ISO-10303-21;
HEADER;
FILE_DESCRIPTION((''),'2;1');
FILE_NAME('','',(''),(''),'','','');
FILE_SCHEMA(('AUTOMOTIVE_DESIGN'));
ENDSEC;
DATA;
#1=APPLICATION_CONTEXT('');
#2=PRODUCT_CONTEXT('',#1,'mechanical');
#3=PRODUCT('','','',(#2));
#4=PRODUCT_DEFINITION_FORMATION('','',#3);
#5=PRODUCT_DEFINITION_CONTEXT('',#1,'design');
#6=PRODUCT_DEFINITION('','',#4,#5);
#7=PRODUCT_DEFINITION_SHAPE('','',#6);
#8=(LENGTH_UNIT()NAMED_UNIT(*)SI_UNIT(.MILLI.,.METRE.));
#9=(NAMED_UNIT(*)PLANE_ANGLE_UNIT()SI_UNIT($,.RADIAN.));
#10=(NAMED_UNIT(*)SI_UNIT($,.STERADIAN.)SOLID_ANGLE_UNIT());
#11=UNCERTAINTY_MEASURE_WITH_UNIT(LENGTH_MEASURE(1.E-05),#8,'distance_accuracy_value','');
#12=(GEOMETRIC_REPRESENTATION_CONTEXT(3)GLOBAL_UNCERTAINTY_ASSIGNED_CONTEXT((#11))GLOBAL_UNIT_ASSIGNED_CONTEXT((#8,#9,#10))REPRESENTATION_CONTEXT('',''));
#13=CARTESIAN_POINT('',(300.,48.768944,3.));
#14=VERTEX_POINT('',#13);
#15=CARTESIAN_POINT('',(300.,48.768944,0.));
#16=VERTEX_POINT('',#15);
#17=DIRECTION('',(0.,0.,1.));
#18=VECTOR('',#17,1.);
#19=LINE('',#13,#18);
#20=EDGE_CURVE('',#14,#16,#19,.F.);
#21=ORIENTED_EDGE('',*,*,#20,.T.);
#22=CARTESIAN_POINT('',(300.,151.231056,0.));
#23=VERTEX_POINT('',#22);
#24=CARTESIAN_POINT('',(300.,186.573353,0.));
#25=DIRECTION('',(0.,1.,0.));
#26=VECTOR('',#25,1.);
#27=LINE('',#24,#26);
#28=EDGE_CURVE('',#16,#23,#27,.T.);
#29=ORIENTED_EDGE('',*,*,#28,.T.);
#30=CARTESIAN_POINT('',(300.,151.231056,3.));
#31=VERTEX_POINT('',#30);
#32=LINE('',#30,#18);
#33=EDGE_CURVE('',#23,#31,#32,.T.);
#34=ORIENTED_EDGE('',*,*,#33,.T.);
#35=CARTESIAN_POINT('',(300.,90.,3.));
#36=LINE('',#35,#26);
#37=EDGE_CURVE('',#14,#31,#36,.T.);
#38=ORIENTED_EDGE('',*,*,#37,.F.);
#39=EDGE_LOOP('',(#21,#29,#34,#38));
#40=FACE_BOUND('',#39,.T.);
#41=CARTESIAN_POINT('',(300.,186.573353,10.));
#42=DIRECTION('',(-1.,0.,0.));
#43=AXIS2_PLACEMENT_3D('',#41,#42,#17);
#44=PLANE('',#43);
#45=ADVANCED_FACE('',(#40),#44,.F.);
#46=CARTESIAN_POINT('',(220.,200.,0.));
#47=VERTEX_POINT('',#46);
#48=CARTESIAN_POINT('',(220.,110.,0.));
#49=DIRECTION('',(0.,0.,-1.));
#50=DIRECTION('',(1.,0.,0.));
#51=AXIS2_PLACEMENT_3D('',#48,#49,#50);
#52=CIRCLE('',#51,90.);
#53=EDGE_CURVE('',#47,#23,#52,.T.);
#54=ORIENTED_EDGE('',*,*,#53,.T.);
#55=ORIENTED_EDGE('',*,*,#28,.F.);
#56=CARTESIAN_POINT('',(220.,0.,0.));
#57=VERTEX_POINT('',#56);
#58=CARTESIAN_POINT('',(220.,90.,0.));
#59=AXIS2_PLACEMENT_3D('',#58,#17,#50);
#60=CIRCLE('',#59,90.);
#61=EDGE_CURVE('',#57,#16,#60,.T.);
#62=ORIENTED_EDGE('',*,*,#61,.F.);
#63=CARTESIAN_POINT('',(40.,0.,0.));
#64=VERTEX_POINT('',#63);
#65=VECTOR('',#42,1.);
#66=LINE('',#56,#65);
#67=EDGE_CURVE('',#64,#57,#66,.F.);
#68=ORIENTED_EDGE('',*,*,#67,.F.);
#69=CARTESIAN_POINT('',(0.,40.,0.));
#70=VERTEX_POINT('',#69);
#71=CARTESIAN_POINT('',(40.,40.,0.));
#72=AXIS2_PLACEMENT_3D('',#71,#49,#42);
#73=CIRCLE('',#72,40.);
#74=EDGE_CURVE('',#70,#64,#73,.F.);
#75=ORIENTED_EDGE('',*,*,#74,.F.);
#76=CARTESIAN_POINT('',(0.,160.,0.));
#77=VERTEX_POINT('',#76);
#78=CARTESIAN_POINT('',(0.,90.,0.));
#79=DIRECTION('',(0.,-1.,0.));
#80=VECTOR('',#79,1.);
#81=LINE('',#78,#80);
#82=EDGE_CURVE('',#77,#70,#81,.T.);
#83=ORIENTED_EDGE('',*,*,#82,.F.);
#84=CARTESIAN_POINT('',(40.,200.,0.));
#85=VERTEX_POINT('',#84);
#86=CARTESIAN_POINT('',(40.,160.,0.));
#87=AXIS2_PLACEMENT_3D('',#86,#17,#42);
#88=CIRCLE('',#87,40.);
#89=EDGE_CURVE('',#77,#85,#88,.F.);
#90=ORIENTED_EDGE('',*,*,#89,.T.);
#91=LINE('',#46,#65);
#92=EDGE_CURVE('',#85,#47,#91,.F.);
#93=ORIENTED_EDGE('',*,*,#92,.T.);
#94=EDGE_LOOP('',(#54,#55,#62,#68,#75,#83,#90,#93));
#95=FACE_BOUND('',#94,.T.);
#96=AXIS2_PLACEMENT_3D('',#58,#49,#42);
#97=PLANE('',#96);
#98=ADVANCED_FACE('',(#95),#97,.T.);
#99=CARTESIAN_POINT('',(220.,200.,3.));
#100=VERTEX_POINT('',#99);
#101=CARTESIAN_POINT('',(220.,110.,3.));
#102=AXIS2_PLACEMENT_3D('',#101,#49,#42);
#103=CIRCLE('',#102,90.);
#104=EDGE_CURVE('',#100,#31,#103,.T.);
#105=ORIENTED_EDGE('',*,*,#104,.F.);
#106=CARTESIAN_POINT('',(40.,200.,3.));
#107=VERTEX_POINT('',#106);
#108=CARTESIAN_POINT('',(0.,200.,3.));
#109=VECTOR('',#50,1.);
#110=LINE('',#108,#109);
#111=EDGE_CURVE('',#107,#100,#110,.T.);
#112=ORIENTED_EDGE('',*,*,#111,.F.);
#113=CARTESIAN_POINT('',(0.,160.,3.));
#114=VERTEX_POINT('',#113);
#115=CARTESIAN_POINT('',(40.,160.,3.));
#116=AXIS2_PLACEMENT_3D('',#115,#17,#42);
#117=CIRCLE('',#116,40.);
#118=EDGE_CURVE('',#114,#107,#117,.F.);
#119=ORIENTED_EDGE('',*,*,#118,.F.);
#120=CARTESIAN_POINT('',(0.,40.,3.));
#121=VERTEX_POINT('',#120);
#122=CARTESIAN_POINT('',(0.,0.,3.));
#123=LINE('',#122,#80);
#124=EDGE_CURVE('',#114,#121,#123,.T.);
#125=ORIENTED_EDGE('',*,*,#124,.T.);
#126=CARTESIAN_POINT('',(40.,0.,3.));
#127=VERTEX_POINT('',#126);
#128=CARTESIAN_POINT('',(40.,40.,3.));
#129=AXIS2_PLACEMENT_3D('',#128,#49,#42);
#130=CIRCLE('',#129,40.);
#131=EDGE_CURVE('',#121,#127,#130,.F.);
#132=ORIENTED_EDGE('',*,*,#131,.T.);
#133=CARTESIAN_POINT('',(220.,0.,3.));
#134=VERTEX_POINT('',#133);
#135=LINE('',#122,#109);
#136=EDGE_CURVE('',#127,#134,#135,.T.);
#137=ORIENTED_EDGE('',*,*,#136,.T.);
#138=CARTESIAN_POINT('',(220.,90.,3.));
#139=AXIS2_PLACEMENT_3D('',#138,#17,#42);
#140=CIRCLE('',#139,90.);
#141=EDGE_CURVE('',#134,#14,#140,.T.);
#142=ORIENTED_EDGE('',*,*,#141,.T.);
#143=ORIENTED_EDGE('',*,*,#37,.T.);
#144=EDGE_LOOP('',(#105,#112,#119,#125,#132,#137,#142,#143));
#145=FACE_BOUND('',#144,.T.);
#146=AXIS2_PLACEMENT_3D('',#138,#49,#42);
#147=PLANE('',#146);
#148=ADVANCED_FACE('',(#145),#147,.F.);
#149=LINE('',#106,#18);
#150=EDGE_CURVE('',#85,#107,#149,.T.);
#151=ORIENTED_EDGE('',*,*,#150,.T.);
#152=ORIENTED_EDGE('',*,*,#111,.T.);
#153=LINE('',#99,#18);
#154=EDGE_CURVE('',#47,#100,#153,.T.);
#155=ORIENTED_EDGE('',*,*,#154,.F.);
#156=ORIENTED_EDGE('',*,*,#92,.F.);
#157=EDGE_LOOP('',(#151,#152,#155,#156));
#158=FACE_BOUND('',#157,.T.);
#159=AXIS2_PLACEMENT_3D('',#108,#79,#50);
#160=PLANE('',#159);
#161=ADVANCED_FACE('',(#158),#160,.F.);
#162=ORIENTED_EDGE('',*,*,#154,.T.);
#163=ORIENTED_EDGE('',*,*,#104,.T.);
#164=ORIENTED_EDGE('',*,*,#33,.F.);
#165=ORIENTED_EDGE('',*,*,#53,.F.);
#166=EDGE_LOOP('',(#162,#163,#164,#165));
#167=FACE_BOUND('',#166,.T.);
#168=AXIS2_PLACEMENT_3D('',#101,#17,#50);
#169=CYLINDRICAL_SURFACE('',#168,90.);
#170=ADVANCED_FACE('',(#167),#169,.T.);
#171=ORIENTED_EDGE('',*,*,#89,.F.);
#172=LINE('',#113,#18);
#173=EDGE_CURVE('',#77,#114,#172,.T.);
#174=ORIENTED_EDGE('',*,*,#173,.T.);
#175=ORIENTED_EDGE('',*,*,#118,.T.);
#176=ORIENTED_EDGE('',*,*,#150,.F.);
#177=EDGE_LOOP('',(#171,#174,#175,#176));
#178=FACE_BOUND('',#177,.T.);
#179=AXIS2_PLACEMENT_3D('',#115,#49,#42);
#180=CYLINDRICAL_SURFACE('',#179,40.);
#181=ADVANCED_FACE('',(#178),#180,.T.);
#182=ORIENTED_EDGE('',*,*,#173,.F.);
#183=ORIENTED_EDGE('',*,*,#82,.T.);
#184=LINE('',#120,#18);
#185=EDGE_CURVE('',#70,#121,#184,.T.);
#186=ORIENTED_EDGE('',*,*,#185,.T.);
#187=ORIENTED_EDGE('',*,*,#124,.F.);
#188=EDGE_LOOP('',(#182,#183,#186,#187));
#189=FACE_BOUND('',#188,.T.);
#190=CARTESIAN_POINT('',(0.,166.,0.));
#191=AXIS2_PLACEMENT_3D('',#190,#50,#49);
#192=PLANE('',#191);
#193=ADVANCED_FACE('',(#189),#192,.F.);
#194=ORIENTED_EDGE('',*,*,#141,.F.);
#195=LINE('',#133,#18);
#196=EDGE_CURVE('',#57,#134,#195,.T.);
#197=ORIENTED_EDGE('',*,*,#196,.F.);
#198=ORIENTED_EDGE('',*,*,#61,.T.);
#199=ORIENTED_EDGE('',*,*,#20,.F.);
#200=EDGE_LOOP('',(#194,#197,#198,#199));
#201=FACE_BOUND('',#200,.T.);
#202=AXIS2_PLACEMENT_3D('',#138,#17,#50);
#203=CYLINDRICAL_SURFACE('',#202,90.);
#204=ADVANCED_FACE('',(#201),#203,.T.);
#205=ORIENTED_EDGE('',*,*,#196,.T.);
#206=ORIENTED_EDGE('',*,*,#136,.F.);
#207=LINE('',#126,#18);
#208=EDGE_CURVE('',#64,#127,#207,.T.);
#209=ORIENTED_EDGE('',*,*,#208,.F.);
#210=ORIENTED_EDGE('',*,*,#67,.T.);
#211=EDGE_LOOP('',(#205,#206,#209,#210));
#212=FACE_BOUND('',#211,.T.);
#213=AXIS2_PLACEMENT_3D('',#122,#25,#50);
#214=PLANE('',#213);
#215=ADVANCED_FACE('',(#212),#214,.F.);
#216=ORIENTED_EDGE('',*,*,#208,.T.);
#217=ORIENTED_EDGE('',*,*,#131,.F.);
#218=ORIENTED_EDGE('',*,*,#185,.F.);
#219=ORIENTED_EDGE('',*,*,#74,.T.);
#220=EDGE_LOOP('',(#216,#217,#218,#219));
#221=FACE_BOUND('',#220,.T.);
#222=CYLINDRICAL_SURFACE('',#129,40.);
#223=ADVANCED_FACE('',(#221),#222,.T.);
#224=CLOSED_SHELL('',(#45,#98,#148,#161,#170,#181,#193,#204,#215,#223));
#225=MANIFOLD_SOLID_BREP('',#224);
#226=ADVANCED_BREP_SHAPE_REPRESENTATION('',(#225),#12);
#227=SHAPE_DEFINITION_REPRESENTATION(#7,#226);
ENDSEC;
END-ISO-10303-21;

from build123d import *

# Parameters (mm, degrees)
EXTRUDE_1_DEPTH         = 3
EXTRUDE_START           = -42
EXTRUDE_2_OUTLINE_W     = 3
EXTRUDE_2_OUTLINE_H     = 100
EXTRUDE_2_DEPTH         = 41
EXTRUDE_START_2         = -1
EXTRUDE_2_2_OUTLINE_R   = 2
EXTRUDE_2_2_OUTLINE_W   = 10
EXTRUDE_2_2_OUTLINE_H   = 120
EXTRUDE_2_2_OUTLINE_R_2 = 52
EXTRUDE_2_2_DEPTH       = 4
EXTRUDE_START_3         = -47
EXTRUDE_2_3_OUTLINE_W   = 3
EXTRUDE_2_3_OUTLINE_H   = 100
EXTRUDE_2_3_DEPTH       = 5
EXTRUDE_2_4_DEPTH       = 180
EXTRUDE_START_4         = -5
EXTRUDE_2_5_DEPTH       = 5
EXTRUDE_START_5         = -3
SKETCH_3_R              = 52
SKETCH_3_W              = 10
SKETCH_3_H              = 120
EXTRUDE_3_DEPTH         = 3
SKETCH_4_R              = 2
EXTRUDE_4_DEPTH         = 3
EXTRUDE_START_6         = -56
SKETCH_5_R              = 2
EXTRUDE_5_DEPTH         = 56
SKETCH_6_W              = 375.582573206
SKETCH_6_H              = 223.737414549
CUT_EXTRUDE_1_DEPTH     = 70
CUT_EXTRUDE_2_DEPTH     = 126
SKETCH_8_W              = 410.596490254
SKETCH_8_H              = 121.986596881
CUT_EXTRUDE_3_DEPTH     = 10
SKETCH_9_W              = 309.492357762
SKETCH_9_H              = 10
EXTRUDE_6_DEPTH         = 3
SKETCH_10_W             = 76.162490496
SKETCH_10_H             = 157.997962214
CUT_EXTRUDE_4_DEPTH     = 10


with BuildPart() as part:
    # 草图1 → 凸台-拉伸1 (new body)
    with BuildSketch(Plane(origin=(-1, 0, 0), x_dir=(0, 0, -1), z_dir=(1, 0, 0))):
        Polygon((33.371794872, 92.353263785), (31.902170139, 91.718942203), (33.371794872, 91.084620622), align=None)
    extrude(amount=-EXTRUDE_1_DEPTH)

    # 凸台-拉伸2: read off the stored shape, not the designer's step
    # 凸台-拉伸2 outline → 凸台-拉伸2 (add)
    with BuildSketch(Plane.XY.offset(EXTRUDE_START)):
        with Locations((-2.5, 90)):
            Rectangle(EXTRUDE_2_OUTLINE_W, EXTRUDE_2_OUTLINE_H)
    extrude(amount=EXTRUDE_2_DEPTH)

    # Extrude 2 2 outline → Extrude 2 2 (add)
    with BuildSketch(Plane.XY.offset(EXTRUDE_START_2)):
        with BuildLine():
            Line((-4, 140), (-4, 40))
            Line((-4, 40), (0, 40))
            ThreePointArc((0, 40), (11.715728753, 11.715728753), (40, 0))
            Line((40, 0), (220, 0))
            ThreePointArc((220, 0), (310, 90), (220, 180))
            Line((220, 180), (40, 180))
            ThreePointArc((40, 180), (11.715728753, 168.284271247), (0, 140))
            Line((0, 140), (-4, 140))
        make_face()
        with Locations((248.3, 165.059930776)):
            Circle(EXTRUDE_2_2_OUTLINE_R, mode=Mode.SUBTRACT)
        with Locations((28, 14)):
            Circle(EXTRUDE_2_2_OUTLINE_R, mode=Mode.SUBTRACT)
        with Locations((139.15, 14)):
            Circle(EXTRUDE_2_2_OUTLINE_R, mode=Mode.SUBTRACT)
        with Locations((27.7366, 79.2634)):
            Circle(EXTRUDE_2_2_OUTLINE_R, mode=Mode.SUBTRACT)
        with Locations((248.3, 14.940069224)):
            Circle(EXTRUDE_2_2_OUTLINE_R, mode=Mode.SUBTRACT)
        with Locations((27.7366, 104.2634)):
            Circle(EXTRUDE_2_2_OUTLINE_R, mode=Mode.SUBTRACT)
        with Locations((107.15, 90)):
            Rectangle(EXTRUDE_2_2_OUTLINE_W, EXTRUDE_2_2_OUTLINE_H, mode=Mode.SUBTRACT)
        with Locations((137.15, 90)):
            Rectangle(EXTRUDE_2_2_OUTLINE_W, EXTRUDE_2_2_OUTLINE_H, mode=Mode.SUBTRACT)
        with Locations((28, 166)):
            Circle(EXTRUDE_2_2_OUTLINE_R, mode=Mode.SUBTRACT)
        with Locations((139.15, 166)):
            Circle(EXTRUDE_2_2_OUTLINE_R, mode=Mode.SUBTRACT)
        with Locations((220, 90)):
            Circle(EXTRUDE_2_2_OUTLINE_R_2, mode=Mode.SUBTRACT)
    extrude(amount=EXTRUDE_2_2_DEPTH)

    # Extrude 2 3 outline → Extrude 2 3 (add)
    with BuildSketch(Plane.XY.offset(EXTRUDE_START_3)):
        with Locations((-2.5, 90)):
            Rectangle(EXTRUDE_2_3_OUTLINE_W, EXTRUDE_2_3_OUTLINE_H)
    extrude(amount=EXTRUDE_2_3_DEPTH)

    # Extrude 2 4 outline → Extrude 2 4 (cut)
    with BuildSketch(Plane(origin=(0, 0, 0), x_dir=(1, 0, 0), z_dir=(0, 1, 0))):
        with BuildLine():
            Line((311, 0), (311, 1))
            Line((311, 1), (-1, 1))
            ThreePointArc((-1, 1), (-0.707106781, 0.292893219), (0, 0))
            Line((0, 0), (311, 0))
        make_face()
        with BuildLine():
            Line((102.15, -4), (102.15, -3))
            Line((102.15, -3), (0, -3))
            ThreePointArc((0, -3), (-2.828427125, -1.828427125), (-4, 1))
            Line((-4, 1), (-4, 2))
            Line((-4, 2), (-5, 2))
            Line((-5, 2), (-5, -4))
            Line((-5, -4), (102.15, -4))
        make_face()
    extrude(amount=EXTRUDE_2_4_DEPTH, mode=Mode.SUBTRACT)

    # Extrude 2 5 outline → Extrude 2 5 (cut)
    with BuildSketch(Plane.YZ.offset(EXTRUDE_START_4)):
        with BuildLine():
            ThreePointArc((45, -47), (41.464466094, -45.535533906), (40, -42))
            Line((40, -42), (40, -41))
            Line((40, -41), (39, -41))
            Line((39, -41), (39, -46.999999996))
            Line((39, -46.999999996), (45, -47))
        make_face()
        with BuildLine():
            ThreePointArc((140, -42), (138.535533906, -45.535533906), (135, -47))
            Line((135, -47), (141, -46.999999996))
            Line((141, -46.999999996), (141, -41))
            Line((141, -41), (140, -41))
            Line((140, -41), (140, -42))
        make_face()
    extrude(amount=EXTRUDE_2_5_DEPTH, mode=Mode.SUBTRACT)

    # 草图3 → 凸台-拉伸3 (add)
    with BuildSketch(Plane.XY.offset(3).offset(EXTRUDE_START_5)):
        with Locations((220, 90)):
            Circle(SKETCH_3_R)
        with Locations((107.15, 90)):
            Rectangle(SKETCH_3_W, SKETCH_3_H)
        with Locations((137.15, 90)):
            Rectangle(SKETCH_3_W, SKETCH_3_H)
    extrude(amount=EXTRUDE_3_DEPTH)

    # 草图4 → 凸台-拉伸4 (add)
    with BuildSketch(Plane.XY.offset(3).offset(EXTRUDE_START_5)):
        with Locations((27.7366, 79.2634)):
            Circle(SKETCH_4_R)
        with Locations((27.7366, 104.2634)):
            Circle(SKETCH_4_R)
    extrude(amount=EXTRUDE_4_DEPTH)

    # 草图5 → 凸台-拉伸5 (add)
    with BuildSketch(Plane.XY.offset(3).offset(EXTRUDE_START_6)):
        with Locations((248.3, 14.940069224)):
            Circle(SKETCH_5_R)
        with Locations((139.15, 14)):
            Circle(SKETCH_5_R)
        with Locations((248.3, 165.059930776)):
            Circle(SKETCH_5_R)
        with Locations((139.15, 166)):
            Circle(SKETCH_5_R)
        with Locations((28, 14)):
            Circle(SKETCH_5_R)
        with Locations((28, 166)):
            Circle(SKETCH_5_R)
    extrude(amount=EXTRUDE_5_DEPTH)

    # 草图6 → 切除-拉伸1 (cut)
    with BuildSketch(Plane(origin=(0, 0, 0), x_dir=(-1, 0, 0), z_dir=(0, 0, -1))):
        with Locations((-149.296459545, 93.267829814)):
            Rectangle(SKETCH_6_W, SKETCH_6_H)
    extrude(amount=CUT_EXTRUDE_1_DEPTH, mode=Mode.SUBTRACT)

    # 草图7 → 切除-拉伸2 (cut)
    with BuildSketch(Plane.XZ.offset(-40)):
        with BuildLine():
            Line((-3.872983346, 0), (0, 0))
            Line((0, 0), (0, 3))
            ThreePointArc((0, 3), (-2.449489743, 2.16227766), (-3.872983346, 0))
        make_face()
    extrude(amount=-CUT_EXTRUDE_2_DEPTH, mode=Mode.SUBTRACT)

    # 草图8 → 切除-拉伸3 (cut)
    with BuildSketch(Plane(origin=(0, 0, 0), x_dir=(-1, 0, 0), z_dir=(0, 0, -1))):
        with Locations((-160.461750975, 150.993298441)):
            Rectangle(SKETCH_8_W, SKETCH_8_H)
    extrude(amount=-CUT_EXTRUDE_3_DEPTH, mode=Mode.SUBTRACT)

    # 草图9 → 凸台-拉伸6 (add)
    with BuildSketch(Plane(origin=(0, 0, 0), x_dir=(-1, 0, 0), z_dir=(0, 0, -1))):
        with Locations((-154.746178881, 95)):
            Rectangle(SKETCH_9_W, SKETCH_9_H)
    extrude(amount=-EXTRUDE_6_DEPTH)

    # 镜向1: part across plane


with BuildPart() as part_1:
    add(part.part)
    add(part.part.mirror(Plane(origin=(309.492357762, 100, 312.653870495), x_dir=(0, 0, 1), z_dir=(0, 1, 0))))

    # 草图10 → 切除-拉伸4 (cut)
    with BuildSketch(Plane(origin=(0, 0, 0), x_dir=(-1, 0, 0), z_dir=(0, 0, -1))):
        with Locations((-338.081245248, 107.574371838)):
            Rectangle(SKETCH_10_W, SKETCH_10_H)
    extrude(amount=-CUT_EXTRUDE_4_DEPTH, mode=Mode.SUBTRACT)


solid = part_1.part
